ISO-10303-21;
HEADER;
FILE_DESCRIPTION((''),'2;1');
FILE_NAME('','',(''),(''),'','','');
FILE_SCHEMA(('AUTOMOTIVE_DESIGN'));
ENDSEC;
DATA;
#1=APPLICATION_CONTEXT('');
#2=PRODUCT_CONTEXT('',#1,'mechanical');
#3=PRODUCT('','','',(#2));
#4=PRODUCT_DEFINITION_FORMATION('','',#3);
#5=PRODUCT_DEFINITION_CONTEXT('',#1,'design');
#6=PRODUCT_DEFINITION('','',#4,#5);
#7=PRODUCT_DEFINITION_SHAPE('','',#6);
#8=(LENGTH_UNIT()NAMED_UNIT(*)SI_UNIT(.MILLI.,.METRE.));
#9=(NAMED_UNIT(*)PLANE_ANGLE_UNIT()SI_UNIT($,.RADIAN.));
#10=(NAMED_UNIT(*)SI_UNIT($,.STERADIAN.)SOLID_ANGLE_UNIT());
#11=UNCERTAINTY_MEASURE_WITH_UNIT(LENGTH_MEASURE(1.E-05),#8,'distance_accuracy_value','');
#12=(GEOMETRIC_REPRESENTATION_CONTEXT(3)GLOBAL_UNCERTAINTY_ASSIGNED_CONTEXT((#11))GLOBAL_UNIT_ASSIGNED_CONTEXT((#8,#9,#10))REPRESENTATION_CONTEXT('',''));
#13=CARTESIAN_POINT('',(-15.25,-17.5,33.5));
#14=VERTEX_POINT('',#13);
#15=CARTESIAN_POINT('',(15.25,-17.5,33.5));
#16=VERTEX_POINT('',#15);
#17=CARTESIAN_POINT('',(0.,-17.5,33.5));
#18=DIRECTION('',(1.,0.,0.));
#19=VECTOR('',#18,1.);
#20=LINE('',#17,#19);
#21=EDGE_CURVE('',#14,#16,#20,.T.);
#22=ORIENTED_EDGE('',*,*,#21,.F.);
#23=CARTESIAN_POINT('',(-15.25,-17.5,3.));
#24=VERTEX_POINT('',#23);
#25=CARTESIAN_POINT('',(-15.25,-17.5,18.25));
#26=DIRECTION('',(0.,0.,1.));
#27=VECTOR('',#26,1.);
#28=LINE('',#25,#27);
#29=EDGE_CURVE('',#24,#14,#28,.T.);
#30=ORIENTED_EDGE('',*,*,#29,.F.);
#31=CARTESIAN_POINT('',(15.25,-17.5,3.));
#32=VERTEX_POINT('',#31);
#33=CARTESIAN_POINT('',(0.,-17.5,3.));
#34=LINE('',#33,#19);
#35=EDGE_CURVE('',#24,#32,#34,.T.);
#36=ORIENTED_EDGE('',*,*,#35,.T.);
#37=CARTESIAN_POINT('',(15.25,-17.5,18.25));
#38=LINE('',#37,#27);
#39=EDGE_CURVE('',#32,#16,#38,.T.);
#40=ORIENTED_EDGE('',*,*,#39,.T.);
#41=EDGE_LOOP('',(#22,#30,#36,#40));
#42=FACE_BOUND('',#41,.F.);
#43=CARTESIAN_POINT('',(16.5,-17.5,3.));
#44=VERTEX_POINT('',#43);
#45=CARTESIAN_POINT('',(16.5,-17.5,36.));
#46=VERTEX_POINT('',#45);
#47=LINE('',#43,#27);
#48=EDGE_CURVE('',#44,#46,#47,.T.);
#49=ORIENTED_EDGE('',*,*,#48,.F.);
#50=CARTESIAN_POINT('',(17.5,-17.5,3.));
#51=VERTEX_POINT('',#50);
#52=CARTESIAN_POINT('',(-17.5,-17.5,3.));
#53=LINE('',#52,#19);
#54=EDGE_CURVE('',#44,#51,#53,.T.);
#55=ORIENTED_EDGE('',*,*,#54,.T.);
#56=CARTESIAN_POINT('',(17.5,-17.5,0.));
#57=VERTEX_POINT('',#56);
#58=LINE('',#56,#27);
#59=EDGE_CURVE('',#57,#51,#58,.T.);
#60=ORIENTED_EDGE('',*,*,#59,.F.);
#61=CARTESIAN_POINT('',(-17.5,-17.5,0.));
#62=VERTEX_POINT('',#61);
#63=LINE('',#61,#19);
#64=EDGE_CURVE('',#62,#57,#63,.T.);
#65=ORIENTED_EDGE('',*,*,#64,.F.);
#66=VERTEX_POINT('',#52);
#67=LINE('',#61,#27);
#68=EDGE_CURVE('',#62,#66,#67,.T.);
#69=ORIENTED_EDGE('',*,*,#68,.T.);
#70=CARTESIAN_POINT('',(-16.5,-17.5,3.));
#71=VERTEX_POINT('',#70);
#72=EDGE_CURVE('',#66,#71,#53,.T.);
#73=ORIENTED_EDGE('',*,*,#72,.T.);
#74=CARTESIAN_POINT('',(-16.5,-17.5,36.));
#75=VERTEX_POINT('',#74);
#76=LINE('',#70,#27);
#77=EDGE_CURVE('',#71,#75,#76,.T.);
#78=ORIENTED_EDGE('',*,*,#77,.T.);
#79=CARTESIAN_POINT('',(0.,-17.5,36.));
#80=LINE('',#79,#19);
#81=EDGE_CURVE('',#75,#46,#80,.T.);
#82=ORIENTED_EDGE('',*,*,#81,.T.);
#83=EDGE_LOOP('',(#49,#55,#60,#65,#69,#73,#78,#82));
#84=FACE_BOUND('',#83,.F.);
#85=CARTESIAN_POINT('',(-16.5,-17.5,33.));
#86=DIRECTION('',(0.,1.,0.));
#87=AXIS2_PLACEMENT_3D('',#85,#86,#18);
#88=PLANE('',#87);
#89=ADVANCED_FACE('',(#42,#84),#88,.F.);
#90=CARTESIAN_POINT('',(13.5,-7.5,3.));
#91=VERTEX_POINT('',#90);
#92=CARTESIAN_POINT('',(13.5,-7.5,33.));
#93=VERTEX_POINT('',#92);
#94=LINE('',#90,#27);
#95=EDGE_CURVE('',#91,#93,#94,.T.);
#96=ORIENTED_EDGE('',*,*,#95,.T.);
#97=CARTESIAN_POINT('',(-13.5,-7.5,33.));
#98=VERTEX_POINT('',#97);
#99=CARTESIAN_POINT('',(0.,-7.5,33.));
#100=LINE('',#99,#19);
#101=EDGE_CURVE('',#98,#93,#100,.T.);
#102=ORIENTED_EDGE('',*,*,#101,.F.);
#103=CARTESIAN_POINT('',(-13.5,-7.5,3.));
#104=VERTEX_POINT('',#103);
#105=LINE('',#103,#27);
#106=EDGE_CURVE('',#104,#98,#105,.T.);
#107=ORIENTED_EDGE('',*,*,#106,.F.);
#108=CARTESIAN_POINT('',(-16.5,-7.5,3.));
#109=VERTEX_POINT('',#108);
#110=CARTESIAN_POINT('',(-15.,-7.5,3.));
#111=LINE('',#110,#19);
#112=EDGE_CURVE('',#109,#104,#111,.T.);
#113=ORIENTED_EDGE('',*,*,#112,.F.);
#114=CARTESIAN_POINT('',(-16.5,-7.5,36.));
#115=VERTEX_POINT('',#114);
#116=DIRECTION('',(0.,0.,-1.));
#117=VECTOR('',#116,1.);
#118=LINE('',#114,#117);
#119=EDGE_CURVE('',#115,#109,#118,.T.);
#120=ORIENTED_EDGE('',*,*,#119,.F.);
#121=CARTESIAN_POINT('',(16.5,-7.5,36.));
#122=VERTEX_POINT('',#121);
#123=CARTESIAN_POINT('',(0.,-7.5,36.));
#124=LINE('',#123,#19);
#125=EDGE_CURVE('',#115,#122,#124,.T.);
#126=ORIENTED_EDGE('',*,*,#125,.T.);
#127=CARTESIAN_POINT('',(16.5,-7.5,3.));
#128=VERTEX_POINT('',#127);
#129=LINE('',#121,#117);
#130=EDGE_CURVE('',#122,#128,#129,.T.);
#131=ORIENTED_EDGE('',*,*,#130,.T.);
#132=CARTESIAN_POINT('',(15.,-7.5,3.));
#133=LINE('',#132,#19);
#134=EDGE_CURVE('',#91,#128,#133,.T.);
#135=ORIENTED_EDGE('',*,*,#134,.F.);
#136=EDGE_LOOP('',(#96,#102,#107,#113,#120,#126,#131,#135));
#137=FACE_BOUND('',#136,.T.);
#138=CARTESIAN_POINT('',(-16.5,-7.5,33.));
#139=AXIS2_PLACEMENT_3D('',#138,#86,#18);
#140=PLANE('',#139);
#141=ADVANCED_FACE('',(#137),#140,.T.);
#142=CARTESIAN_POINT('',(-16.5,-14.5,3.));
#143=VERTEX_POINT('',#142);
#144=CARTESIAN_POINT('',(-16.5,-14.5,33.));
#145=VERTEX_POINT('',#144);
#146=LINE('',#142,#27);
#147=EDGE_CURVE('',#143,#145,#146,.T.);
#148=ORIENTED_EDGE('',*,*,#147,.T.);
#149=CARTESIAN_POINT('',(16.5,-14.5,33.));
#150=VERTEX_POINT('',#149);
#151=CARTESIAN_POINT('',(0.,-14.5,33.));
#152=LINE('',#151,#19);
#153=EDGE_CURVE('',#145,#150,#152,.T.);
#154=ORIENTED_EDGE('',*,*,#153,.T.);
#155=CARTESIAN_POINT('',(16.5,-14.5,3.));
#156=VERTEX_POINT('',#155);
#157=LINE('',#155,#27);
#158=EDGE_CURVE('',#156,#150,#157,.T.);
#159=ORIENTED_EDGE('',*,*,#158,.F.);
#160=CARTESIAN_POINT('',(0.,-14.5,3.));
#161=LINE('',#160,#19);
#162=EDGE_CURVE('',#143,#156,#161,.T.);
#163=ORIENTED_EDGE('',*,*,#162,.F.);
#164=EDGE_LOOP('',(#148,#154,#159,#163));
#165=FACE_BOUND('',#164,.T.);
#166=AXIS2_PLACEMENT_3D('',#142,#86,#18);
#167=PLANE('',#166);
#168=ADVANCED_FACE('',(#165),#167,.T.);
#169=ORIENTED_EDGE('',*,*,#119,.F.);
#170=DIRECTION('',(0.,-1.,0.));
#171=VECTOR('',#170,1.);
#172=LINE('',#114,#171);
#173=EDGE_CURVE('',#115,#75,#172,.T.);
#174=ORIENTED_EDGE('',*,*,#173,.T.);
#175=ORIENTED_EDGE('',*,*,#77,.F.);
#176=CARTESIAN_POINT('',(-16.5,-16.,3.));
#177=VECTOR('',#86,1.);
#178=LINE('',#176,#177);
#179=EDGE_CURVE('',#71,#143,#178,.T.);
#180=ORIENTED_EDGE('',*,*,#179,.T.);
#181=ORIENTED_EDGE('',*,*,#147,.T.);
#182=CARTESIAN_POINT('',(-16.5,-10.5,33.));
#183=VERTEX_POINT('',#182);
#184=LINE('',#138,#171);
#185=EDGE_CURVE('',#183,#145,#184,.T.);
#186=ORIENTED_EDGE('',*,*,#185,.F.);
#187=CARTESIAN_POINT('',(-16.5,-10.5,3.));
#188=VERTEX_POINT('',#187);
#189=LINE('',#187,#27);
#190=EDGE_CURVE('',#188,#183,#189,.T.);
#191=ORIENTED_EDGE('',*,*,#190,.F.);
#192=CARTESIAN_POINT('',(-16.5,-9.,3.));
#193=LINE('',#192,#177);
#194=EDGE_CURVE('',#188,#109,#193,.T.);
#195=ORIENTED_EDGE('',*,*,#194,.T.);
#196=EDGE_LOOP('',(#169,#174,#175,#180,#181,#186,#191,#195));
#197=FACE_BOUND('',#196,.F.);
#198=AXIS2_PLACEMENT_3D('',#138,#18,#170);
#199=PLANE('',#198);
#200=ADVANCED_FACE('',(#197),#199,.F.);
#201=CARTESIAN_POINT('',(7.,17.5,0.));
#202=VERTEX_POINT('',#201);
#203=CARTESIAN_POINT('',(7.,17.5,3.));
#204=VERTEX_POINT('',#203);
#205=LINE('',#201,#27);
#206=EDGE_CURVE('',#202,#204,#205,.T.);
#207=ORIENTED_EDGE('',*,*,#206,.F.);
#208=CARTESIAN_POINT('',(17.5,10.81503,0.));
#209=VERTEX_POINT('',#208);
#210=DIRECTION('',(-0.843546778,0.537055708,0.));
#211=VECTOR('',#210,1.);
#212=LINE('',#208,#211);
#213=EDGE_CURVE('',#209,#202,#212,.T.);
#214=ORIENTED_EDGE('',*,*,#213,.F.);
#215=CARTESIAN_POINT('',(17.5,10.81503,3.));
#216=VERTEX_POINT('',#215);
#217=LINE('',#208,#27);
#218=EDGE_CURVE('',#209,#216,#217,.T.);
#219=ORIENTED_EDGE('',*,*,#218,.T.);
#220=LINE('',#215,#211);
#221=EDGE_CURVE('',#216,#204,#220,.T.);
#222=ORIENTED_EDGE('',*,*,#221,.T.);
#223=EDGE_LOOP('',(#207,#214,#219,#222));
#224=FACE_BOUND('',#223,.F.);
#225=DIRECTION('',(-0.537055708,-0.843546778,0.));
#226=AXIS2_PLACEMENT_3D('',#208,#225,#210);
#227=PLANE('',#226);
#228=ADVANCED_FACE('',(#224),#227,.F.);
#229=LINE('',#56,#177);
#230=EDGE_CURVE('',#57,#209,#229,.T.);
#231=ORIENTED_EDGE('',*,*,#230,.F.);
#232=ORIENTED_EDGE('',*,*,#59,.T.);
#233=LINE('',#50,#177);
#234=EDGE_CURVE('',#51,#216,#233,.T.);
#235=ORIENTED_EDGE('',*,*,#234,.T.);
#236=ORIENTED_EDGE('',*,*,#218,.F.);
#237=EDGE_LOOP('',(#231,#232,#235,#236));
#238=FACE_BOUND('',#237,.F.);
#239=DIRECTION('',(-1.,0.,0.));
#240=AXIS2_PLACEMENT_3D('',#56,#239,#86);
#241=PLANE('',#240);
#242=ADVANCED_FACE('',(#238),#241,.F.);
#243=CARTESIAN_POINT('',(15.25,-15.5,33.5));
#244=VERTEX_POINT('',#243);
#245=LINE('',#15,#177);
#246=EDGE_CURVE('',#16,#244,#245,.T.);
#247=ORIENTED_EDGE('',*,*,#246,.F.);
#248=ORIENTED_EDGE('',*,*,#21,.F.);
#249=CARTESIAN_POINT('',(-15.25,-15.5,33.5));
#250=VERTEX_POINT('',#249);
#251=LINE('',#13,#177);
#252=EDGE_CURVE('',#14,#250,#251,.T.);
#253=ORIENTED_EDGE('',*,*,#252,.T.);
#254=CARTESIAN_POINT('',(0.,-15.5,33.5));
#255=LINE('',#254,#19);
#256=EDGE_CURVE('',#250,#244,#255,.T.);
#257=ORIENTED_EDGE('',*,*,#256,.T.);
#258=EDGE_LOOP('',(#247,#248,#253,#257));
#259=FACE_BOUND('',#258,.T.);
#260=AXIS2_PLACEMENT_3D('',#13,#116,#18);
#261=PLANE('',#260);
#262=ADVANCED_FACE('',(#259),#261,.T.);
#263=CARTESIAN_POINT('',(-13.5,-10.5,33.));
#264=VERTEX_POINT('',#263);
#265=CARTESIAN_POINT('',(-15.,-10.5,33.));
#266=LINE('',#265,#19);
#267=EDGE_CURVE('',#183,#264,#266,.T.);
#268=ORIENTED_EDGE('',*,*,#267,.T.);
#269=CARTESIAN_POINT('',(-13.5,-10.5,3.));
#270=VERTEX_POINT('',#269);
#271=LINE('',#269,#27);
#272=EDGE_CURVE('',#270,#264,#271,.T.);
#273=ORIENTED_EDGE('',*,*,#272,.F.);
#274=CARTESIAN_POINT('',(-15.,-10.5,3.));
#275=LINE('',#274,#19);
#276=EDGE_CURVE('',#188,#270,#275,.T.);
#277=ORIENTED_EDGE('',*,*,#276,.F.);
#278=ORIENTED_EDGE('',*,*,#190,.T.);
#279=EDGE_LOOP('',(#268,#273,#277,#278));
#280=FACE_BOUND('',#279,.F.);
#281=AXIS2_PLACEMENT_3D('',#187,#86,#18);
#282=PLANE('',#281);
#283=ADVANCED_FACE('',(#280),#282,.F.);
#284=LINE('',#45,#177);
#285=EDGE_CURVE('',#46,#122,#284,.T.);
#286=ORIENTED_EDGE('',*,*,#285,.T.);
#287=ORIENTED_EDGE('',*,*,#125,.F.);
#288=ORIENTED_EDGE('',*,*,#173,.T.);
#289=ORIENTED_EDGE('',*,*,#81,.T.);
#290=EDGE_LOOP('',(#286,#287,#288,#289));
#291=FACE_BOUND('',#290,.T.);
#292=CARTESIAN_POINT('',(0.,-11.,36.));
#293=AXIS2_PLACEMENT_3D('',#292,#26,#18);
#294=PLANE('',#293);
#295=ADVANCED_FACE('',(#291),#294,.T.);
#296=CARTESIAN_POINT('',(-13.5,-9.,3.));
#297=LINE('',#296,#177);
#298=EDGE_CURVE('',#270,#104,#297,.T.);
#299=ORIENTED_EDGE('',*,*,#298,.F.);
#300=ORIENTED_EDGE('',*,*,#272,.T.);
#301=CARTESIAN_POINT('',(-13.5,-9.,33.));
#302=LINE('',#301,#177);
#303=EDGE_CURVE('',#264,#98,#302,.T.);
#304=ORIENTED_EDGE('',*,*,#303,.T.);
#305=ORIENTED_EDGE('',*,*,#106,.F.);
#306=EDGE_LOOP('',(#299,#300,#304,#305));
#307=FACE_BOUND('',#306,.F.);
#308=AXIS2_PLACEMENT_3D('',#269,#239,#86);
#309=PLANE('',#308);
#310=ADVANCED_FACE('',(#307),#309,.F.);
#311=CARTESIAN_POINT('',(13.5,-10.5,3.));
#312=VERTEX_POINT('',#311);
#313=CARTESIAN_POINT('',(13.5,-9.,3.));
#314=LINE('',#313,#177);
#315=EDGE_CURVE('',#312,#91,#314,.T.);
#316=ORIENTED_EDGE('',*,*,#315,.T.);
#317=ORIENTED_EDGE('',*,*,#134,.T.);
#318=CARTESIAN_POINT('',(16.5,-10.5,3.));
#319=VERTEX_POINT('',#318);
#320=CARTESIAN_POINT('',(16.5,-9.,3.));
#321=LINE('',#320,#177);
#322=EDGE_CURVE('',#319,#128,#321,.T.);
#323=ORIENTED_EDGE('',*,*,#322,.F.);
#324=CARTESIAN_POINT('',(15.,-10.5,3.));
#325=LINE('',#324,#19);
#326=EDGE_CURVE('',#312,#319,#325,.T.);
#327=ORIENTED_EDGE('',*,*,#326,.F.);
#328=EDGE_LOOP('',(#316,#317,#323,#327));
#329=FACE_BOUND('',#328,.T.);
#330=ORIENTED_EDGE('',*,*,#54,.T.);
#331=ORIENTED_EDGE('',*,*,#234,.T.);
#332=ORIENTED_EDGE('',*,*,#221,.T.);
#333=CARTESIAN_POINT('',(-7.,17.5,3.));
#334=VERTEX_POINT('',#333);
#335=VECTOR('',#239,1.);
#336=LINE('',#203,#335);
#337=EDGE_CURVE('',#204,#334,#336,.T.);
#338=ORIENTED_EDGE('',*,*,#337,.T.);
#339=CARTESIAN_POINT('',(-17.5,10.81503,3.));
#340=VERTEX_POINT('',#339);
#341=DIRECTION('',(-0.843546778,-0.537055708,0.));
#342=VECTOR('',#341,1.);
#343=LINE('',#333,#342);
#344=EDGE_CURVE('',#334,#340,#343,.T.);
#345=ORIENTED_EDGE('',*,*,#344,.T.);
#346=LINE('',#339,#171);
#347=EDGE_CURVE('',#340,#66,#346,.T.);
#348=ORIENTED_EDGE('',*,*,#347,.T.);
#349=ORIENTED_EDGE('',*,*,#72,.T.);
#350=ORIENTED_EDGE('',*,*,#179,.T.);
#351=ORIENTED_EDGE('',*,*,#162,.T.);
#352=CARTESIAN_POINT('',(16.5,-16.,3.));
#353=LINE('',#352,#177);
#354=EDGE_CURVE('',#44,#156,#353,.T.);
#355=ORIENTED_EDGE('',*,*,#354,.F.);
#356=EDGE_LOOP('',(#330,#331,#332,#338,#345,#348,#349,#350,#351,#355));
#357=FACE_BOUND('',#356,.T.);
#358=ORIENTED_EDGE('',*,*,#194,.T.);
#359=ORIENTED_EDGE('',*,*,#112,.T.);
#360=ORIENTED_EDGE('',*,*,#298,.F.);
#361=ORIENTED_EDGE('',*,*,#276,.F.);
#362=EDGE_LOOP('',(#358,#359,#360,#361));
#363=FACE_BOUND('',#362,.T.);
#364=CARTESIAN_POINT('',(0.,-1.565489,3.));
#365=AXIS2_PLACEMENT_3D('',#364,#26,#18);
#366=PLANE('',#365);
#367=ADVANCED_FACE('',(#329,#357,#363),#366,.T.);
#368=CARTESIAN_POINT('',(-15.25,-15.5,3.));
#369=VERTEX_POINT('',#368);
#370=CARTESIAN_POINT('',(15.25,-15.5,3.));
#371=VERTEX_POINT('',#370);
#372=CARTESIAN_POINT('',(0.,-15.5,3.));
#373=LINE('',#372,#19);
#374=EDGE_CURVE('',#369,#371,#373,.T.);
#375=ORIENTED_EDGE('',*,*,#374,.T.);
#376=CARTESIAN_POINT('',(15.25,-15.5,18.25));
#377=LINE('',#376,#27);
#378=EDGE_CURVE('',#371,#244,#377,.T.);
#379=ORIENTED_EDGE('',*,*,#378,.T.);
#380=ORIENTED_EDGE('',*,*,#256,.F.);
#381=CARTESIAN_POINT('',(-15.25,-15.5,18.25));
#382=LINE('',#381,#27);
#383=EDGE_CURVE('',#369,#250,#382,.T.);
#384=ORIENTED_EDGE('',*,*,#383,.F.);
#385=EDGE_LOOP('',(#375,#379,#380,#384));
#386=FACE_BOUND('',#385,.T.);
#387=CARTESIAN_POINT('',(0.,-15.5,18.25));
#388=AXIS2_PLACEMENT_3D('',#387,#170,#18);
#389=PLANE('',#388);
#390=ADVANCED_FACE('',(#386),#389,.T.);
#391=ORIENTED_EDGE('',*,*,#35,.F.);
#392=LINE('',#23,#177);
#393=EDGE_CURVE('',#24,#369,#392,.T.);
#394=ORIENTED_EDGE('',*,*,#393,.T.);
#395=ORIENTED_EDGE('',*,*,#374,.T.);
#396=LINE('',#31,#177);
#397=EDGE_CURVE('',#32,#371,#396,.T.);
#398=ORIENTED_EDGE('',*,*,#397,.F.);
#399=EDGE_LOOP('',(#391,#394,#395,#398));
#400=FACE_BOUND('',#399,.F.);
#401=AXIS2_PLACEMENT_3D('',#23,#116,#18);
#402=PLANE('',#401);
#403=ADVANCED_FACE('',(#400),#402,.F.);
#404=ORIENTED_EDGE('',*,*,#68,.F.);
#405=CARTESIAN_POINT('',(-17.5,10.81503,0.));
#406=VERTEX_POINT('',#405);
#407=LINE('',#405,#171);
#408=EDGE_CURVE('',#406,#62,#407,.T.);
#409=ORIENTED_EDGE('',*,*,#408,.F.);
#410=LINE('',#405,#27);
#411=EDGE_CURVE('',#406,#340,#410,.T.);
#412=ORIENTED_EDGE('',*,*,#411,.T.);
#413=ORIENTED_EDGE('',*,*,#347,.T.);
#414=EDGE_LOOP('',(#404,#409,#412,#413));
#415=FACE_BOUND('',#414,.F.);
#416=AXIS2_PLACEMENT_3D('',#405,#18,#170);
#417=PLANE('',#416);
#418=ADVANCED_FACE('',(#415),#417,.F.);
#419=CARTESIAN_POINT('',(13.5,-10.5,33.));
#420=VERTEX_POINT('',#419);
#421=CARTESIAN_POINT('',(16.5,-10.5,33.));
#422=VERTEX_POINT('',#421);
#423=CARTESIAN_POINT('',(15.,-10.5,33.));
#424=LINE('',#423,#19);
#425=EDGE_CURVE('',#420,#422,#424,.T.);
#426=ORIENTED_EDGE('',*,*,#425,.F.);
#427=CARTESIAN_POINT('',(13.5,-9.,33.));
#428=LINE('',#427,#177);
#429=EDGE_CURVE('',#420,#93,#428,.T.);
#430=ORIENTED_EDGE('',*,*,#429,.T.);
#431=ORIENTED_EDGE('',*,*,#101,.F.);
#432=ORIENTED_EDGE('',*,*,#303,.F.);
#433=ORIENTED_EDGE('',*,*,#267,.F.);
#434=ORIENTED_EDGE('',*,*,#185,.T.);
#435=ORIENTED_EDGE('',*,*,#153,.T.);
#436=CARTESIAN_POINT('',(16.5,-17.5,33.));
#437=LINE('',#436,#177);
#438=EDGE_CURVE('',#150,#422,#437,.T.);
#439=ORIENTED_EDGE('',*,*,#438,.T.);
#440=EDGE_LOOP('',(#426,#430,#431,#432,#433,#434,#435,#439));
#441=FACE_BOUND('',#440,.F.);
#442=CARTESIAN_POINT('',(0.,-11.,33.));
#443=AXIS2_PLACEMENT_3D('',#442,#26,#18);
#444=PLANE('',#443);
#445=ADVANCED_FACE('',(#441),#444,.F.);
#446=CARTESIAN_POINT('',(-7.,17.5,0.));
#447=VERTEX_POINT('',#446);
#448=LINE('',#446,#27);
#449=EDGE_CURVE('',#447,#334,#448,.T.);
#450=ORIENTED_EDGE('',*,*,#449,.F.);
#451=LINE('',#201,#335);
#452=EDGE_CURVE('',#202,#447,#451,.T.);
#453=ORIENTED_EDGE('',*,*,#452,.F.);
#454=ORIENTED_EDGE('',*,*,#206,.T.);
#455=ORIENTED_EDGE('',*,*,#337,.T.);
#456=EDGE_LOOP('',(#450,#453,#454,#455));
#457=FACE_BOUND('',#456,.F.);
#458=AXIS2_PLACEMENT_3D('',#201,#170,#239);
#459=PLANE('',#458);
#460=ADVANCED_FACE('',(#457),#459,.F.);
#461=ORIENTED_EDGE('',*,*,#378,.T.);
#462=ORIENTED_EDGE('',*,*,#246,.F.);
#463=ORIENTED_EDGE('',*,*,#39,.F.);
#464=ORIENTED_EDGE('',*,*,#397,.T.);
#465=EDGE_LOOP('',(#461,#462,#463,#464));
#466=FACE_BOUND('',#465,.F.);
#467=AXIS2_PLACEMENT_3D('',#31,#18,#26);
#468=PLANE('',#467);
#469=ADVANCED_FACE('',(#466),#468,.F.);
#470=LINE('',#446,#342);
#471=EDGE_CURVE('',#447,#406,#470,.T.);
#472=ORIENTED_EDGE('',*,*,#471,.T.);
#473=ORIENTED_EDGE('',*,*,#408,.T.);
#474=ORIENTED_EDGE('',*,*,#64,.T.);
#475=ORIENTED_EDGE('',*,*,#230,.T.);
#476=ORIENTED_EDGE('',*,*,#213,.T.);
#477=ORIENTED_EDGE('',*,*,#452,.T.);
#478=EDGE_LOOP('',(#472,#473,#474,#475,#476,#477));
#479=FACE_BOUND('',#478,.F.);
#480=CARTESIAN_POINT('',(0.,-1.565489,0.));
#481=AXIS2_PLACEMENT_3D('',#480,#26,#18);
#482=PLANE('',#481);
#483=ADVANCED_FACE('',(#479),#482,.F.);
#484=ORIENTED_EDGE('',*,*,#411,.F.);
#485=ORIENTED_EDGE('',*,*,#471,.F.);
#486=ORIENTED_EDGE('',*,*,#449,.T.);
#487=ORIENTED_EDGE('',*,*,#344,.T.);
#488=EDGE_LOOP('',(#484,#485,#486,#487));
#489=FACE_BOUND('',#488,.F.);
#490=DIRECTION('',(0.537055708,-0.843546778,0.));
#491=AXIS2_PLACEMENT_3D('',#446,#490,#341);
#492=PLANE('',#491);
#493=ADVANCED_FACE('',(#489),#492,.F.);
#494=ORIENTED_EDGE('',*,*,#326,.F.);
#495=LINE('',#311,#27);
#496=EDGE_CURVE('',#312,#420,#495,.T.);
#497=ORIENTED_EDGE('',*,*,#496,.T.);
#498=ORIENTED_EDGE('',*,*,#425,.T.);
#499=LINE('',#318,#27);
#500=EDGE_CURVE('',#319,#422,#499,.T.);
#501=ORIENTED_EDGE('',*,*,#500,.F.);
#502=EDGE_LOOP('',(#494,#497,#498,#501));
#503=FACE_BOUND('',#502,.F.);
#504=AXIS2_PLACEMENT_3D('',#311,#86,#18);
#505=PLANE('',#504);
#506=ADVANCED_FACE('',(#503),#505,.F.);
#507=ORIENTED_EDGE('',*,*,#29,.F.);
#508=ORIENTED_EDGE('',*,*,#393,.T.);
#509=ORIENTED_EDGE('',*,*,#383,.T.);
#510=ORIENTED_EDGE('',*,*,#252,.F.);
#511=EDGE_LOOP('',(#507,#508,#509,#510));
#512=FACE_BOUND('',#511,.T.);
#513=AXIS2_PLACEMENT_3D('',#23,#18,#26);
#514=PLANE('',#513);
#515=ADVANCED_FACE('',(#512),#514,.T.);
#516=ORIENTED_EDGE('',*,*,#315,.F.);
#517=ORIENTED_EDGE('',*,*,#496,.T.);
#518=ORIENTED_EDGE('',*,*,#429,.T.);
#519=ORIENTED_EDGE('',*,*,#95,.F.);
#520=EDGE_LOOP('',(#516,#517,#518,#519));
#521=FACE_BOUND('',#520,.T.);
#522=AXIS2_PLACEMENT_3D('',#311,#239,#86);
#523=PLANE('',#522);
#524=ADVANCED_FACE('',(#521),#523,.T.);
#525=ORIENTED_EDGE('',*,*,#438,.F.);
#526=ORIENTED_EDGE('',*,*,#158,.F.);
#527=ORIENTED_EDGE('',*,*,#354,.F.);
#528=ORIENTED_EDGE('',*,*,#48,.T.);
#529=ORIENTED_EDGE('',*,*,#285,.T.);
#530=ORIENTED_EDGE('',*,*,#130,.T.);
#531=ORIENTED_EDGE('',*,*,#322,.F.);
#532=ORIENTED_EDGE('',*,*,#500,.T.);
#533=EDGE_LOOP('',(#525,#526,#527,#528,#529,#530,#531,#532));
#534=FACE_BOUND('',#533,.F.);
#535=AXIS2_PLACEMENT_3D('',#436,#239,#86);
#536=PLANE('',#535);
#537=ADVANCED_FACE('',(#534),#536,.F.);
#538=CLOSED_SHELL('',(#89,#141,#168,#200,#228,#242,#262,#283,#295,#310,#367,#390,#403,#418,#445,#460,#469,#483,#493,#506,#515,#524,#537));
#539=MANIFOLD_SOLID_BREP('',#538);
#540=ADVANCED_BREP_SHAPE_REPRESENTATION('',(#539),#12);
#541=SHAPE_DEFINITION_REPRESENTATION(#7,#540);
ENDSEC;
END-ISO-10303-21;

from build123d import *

# Parameters (mm, degrees)
F1_DEPTH = 3
F2_W     = 33
F2_H     = 3
F2_W_2   = 3
F3_DEPTH = 30
F4_W     = 33
F4_H     = 7
F4_H_2   = 3
F5_DEPTH = 3
F6_W     = 30.5
F6_H     = 30.5
F7_DEPTH = 2


# Not quite as in the source:
# - a feature names something its author has since deleted; it is built from what else it names


with BuildPart() as f1:
    # F0 (on Top) → F1 (new body)
    with BuildSketch(Plane.XY):
        Polygon((17.5, 10.8150299639), (7, 17.5), (-7, 17.5), (-17.5, 10.8150299639), (-17.5, -17.5), (17.5, -17.5), align=None)
    extrude(amount=F1_DEPTH)

    # F2 (on face) → F3 (join)
    with BuildSketch(Plane.XY.offset(3)):
        with Locations((0, -16)):
            Rectangle(F2_W, F2_H)
        with Locations((-15, -9)):
            Rectangle(F2_W_2, F2_H)
        with Locations((15, -9)):
            Rectangle(F2_W_2, F2_H)
    extrude(amount=F3_DEPTH)

    # F4 (on face) → F5 (join)
    with BuildSketch(Plane.XY.offset(33)):
        with Locations((0, -11)):
            Rectangle(F4_W, F4_H)
        with Locations((0, -16)):
            Rectangle(F4_W, F4_H_2)
    extrude(amount=F5_DEPTH)

    # F6 (on face) → F7 (cut)
    with BuildSketch(Plane.XZ.offset(17.5)):
        with Locations((0, 18.25)):
            Rectangle(F6_W, F6_H)
    extrude(amount=-F7_DEPTH, mode=Mode.SUBTRACT)


solid = f1.part
